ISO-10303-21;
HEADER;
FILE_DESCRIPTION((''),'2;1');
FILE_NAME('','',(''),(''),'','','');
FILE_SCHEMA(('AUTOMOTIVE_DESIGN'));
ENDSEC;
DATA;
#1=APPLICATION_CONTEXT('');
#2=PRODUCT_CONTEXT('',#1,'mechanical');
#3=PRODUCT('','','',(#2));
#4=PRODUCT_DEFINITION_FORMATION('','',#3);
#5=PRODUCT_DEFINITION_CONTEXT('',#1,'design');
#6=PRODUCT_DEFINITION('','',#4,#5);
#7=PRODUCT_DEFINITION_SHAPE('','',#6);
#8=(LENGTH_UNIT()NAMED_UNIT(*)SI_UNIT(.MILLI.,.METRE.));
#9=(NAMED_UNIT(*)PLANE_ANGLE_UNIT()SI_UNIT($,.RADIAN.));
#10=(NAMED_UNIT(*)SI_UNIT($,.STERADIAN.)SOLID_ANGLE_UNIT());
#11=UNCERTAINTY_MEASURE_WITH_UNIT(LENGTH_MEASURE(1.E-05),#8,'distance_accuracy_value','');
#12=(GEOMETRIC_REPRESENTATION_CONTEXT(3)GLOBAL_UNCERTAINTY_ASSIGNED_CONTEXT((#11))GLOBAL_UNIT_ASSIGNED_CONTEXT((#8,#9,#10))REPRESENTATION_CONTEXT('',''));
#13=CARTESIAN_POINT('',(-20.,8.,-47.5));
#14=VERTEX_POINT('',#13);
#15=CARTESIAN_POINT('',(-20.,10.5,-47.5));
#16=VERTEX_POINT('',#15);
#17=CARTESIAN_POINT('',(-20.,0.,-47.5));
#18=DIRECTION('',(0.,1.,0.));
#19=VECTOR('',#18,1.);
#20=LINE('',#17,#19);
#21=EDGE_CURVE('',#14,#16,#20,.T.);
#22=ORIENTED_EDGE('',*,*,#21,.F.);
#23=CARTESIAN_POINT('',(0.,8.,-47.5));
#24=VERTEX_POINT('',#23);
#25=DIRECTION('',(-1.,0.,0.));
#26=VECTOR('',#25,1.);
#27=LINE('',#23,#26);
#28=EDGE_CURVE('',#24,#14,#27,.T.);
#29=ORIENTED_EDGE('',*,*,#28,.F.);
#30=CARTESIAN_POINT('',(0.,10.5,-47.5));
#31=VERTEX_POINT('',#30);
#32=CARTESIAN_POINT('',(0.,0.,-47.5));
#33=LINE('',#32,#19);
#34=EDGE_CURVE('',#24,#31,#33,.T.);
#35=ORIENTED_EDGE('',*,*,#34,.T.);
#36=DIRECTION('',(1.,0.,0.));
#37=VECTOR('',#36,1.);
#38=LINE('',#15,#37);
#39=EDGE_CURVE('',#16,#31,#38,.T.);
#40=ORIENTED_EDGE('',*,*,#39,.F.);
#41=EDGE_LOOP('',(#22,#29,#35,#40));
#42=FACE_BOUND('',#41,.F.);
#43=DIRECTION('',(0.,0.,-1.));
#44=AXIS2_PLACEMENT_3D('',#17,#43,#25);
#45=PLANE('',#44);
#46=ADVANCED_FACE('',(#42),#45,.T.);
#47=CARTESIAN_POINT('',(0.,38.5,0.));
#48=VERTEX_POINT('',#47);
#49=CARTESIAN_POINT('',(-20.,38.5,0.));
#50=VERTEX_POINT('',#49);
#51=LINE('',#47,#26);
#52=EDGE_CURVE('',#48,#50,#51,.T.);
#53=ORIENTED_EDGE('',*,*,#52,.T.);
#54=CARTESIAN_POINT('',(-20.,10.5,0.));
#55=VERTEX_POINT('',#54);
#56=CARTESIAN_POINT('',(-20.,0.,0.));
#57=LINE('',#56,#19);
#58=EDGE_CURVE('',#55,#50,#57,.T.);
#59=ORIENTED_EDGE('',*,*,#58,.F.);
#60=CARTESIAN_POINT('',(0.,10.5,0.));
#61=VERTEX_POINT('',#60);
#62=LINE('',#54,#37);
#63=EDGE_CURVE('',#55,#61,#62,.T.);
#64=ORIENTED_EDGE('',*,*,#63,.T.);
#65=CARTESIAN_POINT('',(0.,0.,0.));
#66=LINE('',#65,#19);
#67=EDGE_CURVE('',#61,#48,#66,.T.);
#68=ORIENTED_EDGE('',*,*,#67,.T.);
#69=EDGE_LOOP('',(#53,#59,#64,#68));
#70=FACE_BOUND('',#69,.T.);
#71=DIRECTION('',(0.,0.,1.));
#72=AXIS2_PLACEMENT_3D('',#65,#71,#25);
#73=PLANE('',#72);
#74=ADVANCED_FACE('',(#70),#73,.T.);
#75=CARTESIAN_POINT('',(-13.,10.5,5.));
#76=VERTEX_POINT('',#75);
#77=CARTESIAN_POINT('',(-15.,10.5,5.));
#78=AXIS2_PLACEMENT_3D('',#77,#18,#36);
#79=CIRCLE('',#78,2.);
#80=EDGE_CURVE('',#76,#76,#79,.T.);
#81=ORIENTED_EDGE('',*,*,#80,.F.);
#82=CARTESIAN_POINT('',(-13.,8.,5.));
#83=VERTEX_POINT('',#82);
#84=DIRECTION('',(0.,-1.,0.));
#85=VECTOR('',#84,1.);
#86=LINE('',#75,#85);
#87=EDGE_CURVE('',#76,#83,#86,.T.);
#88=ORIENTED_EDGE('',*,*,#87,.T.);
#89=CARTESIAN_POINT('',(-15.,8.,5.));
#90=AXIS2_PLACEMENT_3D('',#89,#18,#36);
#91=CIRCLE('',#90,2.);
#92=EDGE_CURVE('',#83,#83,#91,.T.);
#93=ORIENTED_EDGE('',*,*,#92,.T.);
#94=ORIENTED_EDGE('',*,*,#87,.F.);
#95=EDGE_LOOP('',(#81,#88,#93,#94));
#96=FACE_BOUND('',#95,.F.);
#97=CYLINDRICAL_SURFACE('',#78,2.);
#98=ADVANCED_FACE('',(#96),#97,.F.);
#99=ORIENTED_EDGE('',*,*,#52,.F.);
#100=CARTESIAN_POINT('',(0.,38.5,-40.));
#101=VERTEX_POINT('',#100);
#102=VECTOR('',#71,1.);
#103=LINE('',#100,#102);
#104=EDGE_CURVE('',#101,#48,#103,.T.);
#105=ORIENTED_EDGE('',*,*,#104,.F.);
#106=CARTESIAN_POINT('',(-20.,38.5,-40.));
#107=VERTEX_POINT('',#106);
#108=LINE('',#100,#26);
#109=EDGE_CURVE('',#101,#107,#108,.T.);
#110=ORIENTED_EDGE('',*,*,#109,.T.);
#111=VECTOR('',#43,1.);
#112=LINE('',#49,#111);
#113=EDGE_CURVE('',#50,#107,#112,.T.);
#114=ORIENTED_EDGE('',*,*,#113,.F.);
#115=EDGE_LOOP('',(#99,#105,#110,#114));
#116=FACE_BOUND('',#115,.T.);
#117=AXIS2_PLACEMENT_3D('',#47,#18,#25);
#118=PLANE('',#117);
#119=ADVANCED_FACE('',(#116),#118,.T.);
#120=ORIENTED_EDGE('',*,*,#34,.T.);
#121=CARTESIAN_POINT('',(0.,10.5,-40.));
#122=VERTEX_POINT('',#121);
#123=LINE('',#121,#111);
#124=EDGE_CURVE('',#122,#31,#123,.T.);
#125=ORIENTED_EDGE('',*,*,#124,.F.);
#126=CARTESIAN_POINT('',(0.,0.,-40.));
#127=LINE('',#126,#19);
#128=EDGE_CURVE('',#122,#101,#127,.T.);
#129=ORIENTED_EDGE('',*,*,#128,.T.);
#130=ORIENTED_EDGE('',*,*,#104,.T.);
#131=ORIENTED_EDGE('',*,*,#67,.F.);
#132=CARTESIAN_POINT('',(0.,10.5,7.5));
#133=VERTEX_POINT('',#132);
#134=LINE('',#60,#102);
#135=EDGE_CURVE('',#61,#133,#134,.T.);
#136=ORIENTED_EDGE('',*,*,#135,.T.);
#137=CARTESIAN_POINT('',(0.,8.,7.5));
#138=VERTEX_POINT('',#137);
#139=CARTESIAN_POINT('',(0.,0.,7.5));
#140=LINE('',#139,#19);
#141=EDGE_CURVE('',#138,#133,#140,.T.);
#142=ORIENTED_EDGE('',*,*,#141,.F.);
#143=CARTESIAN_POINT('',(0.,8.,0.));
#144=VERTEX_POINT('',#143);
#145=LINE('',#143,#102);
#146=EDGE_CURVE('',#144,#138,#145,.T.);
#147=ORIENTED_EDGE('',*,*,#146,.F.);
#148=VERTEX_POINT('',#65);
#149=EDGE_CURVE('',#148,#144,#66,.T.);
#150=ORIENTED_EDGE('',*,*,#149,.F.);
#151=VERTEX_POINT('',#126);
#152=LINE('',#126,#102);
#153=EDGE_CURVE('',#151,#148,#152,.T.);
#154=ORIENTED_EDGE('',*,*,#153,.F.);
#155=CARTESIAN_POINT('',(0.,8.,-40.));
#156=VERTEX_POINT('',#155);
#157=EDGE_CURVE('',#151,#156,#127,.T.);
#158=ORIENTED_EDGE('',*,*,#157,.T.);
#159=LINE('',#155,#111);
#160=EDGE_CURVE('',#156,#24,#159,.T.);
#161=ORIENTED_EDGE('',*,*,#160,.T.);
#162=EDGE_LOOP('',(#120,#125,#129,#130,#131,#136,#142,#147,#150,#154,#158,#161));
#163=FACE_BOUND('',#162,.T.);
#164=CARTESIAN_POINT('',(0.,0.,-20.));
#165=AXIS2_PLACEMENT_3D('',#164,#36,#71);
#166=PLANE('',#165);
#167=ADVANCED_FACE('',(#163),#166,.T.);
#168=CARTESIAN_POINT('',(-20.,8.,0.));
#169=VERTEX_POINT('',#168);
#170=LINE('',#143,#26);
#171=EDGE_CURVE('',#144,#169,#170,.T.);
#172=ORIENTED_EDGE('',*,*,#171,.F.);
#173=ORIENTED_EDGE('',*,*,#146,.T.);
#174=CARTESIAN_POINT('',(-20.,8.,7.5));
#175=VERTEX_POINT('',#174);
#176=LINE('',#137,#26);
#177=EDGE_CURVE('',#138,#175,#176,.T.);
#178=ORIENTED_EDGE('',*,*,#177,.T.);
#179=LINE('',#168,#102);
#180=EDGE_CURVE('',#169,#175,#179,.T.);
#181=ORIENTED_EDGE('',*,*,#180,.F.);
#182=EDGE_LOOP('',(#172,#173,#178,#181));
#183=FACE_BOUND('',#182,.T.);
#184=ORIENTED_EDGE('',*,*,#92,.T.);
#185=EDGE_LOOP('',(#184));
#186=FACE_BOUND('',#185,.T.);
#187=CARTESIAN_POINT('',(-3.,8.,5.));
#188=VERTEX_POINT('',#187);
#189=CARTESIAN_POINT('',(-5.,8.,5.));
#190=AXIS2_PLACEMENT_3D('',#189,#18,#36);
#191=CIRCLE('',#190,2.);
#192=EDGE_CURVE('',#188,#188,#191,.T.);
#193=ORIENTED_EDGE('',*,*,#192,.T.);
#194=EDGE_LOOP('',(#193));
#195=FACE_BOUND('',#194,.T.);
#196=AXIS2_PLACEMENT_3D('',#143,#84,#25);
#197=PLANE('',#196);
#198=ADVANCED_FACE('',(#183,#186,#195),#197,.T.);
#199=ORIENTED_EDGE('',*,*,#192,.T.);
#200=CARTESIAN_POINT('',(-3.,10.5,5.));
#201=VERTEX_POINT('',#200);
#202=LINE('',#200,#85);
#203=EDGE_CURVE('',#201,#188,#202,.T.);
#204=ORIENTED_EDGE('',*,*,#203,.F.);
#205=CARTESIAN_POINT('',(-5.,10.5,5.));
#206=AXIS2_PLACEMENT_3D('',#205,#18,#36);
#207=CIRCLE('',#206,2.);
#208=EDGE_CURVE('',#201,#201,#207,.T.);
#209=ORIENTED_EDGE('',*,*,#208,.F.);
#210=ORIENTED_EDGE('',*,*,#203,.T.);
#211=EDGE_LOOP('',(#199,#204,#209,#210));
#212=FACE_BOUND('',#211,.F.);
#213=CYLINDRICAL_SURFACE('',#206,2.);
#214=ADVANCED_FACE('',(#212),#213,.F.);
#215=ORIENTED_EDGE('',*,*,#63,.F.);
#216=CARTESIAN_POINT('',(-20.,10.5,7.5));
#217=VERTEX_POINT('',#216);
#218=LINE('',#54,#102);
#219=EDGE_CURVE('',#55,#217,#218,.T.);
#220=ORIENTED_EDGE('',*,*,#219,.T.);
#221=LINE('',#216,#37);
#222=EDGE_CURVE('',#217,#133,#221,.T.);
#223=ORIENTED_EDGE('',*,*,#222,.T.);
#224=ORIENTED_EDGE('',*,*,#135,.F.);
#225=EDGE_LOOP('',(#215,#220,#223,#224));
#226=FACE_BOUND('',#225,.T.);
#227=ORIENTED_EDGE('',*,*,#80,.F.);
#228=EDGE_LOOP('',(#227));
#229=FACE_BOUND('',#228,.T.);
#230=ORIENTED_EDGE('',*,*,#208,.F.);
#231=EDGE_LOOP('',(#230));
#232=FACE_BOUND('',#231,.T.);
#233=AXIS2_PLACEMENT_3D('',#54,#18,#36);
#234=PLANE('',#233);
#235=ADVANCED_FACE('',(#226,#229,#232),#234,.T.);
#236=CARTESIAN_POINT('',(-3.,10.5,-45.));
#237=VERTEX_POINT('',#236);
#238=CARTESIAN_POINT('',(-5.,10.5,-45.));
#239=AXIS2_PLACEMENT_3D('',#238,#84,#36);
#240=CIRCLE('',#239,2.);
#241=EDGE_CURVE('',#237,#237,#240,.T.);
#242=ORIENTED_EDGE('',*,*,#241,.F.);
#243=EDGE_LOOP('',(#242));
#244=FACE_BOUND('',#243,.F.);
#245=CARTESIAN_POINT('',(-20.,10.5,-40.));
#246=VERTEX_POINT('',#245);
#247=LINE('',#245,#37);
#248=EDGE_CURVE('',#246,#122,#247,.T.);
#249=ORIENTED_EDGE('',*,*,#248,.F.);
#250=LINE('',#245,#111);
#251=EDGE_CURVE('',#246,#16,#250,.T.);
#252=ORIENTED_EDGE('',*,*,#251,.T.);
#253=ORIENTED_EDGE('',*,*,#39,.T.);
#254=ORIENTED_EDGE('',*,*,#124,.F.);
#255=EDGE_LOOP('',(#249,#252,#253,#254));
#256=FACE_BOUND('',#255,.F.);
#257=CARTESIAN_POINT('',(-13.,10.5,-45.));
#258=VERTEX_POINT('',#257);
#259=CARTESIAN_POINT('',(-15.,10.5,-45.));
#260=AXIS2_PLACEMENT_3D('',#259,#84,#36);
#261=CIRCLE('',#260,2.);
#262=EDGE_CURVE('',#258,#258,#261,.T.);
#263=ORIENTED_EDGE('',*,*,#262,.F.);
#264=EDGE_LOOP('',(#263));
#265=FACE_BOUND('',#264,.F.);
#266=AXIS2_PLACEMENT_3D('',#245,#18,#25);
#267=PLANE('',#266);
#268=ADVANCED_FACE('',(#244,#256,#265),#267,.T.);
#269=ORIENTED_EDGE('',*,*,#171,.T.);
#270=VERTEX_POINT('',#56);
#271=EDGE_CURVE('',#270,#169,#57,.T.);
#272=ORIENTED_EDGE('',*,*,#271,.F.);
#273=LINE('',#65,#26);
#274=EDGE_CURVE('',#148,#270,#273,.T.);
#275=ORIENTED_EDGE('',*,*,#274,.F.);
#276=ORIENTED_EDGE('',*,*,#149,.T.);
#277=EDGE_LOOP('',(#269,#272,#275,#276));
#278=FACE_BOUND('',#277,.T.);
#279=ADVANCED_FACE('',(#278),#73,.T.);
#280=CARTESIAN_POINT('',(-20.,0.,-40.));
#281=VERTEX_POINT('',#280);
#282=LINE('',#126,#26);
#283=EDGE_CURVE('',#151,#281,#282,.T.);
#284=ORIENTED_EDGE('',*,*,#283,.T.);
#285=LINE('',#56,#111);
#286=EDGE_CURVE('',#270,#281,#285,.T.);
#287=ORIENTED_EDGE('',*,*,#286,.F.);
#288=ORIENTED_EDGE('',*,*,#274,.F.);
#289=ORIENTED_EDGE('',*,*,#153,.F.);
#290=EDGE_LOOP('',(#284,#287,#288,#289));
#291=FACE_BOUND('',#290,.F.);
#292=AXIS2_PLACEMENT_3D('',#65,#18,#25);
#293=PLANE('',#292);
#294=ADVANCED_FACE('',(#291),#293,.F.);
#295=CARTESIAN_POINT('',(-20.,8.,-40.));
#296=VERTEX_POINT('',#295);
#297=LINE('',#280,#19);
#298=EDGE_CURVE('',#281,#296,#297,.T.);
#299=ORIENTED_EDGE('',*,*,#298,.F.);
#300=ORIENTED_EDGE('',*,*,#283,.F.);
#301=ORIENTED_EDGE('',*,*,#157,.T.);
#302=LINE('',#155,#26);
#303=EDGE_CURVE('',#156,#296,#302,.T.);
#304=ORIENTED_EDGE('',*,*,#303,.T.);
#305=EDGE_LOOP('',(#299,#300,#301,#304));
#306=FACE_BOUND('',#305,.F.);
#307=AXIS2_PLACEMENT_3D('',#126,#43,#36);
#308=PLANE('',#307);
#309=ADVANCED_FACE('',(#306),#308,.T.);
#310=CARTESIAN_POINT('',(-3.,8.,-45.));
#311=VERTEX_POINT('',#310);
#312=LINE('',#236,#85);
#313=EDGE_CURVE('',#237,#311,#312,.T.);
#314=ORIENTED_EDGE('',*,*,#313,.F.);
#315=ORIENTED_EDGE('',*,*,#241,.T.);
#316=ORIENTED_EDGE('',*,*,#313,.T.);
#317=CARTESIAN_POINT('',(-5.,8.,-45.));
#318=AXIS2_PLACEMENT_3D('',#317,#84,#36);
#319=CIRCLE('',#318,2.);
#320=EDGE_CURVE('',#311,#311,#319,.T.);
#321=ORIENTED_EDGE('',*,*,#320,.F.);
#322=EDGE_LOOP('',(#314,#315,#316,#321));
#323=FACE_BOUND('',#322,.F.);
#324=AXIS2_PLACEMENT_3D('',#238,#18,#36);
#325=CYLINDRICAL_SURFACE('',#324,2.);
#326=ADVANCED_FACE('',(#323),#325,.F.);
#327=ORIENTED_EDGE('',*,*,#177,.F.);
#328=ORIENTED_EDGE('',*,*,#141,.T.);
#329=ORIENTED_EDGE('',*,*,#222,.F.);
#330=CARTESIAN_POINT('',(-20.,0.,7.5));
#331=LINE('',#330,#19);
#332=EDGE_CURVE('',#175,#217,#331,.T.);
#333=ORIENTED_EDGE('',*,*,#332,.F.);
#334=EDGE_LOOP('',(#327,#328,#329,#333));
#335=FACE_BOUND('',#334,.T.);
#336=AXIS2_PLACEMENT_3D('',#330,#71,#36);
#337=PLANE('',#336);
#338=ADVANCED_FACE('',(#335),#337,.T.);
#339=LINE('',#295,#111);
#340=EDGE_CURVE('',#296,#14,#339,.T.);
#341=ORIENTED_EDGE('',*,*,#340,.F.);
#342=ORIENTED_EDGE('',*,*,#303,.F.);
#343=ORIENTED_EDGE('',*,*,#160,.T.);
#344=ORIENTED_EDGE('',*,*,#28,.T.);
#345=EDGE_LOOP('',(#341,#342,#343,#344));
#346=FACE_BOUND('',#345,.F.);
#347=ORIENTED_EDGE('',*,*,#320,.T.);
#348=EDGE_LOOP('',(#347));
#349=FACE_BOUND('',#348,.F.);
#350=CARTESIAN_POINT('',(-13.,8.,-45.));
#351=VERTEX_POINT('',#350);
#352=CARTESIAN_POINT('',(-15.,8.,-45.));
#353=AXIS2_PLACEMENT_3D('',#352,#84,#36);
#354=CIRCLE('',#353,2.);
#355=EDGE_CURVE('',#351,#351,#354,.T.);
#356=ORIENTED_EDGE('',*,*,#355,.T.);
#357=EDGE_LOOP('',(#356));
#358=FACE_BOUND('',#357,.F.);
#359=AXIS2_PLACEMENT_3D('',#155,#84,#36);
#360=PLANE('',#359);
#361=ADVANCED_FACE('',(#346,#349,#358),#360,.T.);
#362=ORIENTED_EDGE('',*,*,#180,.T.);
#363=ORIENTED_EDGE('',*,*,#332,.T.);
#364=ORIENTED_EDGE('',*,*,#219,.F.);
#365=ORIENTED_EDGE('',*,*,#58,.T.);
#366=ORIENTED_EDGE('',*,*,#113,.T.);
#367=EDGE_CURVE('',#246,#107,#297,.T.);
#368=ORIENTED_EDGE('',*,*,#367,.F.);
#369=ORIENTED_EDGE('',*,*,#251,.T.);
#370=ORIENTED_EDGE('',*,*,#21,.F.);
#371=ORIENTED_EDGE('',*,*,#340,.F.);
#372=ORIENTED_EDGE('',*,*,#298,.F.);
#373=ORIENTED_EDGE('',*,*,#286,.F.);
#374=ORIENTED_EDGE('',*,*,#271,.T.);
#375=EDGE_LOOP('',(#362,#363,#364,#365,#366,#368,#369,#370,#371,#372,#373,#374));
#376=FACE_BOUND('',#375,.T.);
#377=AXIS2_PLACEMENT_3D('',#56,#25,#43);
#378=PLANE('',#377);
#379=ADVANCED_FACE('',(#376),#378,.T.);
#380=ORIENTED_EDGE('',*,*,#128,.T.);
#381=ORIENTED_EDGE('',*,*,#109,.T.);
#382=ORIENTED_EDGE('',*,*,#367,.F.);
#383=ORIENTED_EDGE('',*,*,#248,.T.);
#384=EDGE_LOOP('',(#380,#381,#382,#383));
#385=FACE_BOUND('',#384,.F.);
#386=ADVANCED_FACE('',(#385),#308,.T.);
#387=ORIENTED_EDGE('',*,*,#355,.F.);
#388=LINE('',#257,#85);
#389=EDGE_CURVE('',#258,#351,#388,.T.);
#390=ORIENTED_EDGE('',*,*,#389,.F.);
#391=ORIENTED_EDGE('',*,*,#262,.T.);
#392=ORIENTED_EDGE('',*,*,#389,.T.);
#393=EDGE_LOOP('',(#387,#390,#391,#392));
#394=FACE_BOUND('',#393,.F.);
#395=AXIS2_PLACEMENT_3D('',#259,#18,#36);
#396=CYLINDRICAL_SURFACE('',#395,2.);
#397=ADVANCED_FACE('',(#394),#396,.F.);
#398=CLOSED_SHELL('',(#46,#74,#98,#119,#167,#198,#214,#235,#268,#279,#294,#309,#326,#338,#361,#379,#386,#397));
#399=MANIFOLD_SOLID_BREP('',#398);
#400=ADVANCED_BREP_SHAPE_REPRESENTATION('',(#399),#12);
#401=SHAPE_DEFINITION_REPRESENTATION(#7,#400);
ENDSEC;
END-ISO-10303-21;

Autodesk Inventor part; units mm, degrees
ref_plane "YZ Plane" through (0, 0, 0) normal (1, 0, 0) x (0, 1, 0)
ref_plane "XZ Plane" through (0, 0, 0) normal (0, 1, 0) x (-1, 0, 0)
ref_plane "XY Plane" through (0, 0, 0) normal (0, 0, 1) x (1, 0, 0)
sketch "Sketch4" plane through (0, 0, 0) normal (0, 1, 0) x (-1, 0, 0)
  line L0 (0, 0) -> (20, 0)
  line L1 (20, 0) -> (20, -20)
  line L2 (20, -20) -> (0, -20)
  line L3 (0, -20) -> (0, 0)
  dimension "d16" = 20
  dimension "d17" = 20
extrude "Extrusion4" add sketch "Sketch4" along normal blind 38.5
sketch "Sketch5" plane through (-20, 0, 0) normal (0, 0, 1) x (1, 0, 0)
  line L0 (0, 0) -> (0, 38.5) projected
  line L1 (20, 0) -> (20, 38.5) projected
  line L2 (0, 10.5) -> (20, 10.5)
  line L3 (20, 10.5) -> (20, 8)
  line L4 (20, 8) -> (0, 8)
  line L5 (0, 8) -> (0, 10.5)
  dimension "d20" = 2.5
  dimension "d21" = 8
extrude "Extrusion5" add sketch "Sketch5" along normal blind 7.5
sketch "Sketch6" plane through (-20, 10.5, 0) normal (0, 1, 0) x (1, 0, 0)
  circle A0 centre (5, -5) radius 2
  circle A1 centre (15, -5) radius 2
  line L0 (0, 0) -> (20, 0) projected
  line L1 (0, 0) -> (0, -7.5) projected
  line L2 (20, 0) -> (20, -7.5) projected
  dimension "d24" = 4
  dimension "d25" = 4
  dimension "d26" = 5
  dimension "d27" = 5
  dimension "d28" = 5
  dimension "d29" = 5
extrude "Extrusion6" cut sketch "Sketch6" against normal through all
mirror "Mirror1" about plane through (0, 0, -20) normal (0, 0, -1)
properties part number "servo"
